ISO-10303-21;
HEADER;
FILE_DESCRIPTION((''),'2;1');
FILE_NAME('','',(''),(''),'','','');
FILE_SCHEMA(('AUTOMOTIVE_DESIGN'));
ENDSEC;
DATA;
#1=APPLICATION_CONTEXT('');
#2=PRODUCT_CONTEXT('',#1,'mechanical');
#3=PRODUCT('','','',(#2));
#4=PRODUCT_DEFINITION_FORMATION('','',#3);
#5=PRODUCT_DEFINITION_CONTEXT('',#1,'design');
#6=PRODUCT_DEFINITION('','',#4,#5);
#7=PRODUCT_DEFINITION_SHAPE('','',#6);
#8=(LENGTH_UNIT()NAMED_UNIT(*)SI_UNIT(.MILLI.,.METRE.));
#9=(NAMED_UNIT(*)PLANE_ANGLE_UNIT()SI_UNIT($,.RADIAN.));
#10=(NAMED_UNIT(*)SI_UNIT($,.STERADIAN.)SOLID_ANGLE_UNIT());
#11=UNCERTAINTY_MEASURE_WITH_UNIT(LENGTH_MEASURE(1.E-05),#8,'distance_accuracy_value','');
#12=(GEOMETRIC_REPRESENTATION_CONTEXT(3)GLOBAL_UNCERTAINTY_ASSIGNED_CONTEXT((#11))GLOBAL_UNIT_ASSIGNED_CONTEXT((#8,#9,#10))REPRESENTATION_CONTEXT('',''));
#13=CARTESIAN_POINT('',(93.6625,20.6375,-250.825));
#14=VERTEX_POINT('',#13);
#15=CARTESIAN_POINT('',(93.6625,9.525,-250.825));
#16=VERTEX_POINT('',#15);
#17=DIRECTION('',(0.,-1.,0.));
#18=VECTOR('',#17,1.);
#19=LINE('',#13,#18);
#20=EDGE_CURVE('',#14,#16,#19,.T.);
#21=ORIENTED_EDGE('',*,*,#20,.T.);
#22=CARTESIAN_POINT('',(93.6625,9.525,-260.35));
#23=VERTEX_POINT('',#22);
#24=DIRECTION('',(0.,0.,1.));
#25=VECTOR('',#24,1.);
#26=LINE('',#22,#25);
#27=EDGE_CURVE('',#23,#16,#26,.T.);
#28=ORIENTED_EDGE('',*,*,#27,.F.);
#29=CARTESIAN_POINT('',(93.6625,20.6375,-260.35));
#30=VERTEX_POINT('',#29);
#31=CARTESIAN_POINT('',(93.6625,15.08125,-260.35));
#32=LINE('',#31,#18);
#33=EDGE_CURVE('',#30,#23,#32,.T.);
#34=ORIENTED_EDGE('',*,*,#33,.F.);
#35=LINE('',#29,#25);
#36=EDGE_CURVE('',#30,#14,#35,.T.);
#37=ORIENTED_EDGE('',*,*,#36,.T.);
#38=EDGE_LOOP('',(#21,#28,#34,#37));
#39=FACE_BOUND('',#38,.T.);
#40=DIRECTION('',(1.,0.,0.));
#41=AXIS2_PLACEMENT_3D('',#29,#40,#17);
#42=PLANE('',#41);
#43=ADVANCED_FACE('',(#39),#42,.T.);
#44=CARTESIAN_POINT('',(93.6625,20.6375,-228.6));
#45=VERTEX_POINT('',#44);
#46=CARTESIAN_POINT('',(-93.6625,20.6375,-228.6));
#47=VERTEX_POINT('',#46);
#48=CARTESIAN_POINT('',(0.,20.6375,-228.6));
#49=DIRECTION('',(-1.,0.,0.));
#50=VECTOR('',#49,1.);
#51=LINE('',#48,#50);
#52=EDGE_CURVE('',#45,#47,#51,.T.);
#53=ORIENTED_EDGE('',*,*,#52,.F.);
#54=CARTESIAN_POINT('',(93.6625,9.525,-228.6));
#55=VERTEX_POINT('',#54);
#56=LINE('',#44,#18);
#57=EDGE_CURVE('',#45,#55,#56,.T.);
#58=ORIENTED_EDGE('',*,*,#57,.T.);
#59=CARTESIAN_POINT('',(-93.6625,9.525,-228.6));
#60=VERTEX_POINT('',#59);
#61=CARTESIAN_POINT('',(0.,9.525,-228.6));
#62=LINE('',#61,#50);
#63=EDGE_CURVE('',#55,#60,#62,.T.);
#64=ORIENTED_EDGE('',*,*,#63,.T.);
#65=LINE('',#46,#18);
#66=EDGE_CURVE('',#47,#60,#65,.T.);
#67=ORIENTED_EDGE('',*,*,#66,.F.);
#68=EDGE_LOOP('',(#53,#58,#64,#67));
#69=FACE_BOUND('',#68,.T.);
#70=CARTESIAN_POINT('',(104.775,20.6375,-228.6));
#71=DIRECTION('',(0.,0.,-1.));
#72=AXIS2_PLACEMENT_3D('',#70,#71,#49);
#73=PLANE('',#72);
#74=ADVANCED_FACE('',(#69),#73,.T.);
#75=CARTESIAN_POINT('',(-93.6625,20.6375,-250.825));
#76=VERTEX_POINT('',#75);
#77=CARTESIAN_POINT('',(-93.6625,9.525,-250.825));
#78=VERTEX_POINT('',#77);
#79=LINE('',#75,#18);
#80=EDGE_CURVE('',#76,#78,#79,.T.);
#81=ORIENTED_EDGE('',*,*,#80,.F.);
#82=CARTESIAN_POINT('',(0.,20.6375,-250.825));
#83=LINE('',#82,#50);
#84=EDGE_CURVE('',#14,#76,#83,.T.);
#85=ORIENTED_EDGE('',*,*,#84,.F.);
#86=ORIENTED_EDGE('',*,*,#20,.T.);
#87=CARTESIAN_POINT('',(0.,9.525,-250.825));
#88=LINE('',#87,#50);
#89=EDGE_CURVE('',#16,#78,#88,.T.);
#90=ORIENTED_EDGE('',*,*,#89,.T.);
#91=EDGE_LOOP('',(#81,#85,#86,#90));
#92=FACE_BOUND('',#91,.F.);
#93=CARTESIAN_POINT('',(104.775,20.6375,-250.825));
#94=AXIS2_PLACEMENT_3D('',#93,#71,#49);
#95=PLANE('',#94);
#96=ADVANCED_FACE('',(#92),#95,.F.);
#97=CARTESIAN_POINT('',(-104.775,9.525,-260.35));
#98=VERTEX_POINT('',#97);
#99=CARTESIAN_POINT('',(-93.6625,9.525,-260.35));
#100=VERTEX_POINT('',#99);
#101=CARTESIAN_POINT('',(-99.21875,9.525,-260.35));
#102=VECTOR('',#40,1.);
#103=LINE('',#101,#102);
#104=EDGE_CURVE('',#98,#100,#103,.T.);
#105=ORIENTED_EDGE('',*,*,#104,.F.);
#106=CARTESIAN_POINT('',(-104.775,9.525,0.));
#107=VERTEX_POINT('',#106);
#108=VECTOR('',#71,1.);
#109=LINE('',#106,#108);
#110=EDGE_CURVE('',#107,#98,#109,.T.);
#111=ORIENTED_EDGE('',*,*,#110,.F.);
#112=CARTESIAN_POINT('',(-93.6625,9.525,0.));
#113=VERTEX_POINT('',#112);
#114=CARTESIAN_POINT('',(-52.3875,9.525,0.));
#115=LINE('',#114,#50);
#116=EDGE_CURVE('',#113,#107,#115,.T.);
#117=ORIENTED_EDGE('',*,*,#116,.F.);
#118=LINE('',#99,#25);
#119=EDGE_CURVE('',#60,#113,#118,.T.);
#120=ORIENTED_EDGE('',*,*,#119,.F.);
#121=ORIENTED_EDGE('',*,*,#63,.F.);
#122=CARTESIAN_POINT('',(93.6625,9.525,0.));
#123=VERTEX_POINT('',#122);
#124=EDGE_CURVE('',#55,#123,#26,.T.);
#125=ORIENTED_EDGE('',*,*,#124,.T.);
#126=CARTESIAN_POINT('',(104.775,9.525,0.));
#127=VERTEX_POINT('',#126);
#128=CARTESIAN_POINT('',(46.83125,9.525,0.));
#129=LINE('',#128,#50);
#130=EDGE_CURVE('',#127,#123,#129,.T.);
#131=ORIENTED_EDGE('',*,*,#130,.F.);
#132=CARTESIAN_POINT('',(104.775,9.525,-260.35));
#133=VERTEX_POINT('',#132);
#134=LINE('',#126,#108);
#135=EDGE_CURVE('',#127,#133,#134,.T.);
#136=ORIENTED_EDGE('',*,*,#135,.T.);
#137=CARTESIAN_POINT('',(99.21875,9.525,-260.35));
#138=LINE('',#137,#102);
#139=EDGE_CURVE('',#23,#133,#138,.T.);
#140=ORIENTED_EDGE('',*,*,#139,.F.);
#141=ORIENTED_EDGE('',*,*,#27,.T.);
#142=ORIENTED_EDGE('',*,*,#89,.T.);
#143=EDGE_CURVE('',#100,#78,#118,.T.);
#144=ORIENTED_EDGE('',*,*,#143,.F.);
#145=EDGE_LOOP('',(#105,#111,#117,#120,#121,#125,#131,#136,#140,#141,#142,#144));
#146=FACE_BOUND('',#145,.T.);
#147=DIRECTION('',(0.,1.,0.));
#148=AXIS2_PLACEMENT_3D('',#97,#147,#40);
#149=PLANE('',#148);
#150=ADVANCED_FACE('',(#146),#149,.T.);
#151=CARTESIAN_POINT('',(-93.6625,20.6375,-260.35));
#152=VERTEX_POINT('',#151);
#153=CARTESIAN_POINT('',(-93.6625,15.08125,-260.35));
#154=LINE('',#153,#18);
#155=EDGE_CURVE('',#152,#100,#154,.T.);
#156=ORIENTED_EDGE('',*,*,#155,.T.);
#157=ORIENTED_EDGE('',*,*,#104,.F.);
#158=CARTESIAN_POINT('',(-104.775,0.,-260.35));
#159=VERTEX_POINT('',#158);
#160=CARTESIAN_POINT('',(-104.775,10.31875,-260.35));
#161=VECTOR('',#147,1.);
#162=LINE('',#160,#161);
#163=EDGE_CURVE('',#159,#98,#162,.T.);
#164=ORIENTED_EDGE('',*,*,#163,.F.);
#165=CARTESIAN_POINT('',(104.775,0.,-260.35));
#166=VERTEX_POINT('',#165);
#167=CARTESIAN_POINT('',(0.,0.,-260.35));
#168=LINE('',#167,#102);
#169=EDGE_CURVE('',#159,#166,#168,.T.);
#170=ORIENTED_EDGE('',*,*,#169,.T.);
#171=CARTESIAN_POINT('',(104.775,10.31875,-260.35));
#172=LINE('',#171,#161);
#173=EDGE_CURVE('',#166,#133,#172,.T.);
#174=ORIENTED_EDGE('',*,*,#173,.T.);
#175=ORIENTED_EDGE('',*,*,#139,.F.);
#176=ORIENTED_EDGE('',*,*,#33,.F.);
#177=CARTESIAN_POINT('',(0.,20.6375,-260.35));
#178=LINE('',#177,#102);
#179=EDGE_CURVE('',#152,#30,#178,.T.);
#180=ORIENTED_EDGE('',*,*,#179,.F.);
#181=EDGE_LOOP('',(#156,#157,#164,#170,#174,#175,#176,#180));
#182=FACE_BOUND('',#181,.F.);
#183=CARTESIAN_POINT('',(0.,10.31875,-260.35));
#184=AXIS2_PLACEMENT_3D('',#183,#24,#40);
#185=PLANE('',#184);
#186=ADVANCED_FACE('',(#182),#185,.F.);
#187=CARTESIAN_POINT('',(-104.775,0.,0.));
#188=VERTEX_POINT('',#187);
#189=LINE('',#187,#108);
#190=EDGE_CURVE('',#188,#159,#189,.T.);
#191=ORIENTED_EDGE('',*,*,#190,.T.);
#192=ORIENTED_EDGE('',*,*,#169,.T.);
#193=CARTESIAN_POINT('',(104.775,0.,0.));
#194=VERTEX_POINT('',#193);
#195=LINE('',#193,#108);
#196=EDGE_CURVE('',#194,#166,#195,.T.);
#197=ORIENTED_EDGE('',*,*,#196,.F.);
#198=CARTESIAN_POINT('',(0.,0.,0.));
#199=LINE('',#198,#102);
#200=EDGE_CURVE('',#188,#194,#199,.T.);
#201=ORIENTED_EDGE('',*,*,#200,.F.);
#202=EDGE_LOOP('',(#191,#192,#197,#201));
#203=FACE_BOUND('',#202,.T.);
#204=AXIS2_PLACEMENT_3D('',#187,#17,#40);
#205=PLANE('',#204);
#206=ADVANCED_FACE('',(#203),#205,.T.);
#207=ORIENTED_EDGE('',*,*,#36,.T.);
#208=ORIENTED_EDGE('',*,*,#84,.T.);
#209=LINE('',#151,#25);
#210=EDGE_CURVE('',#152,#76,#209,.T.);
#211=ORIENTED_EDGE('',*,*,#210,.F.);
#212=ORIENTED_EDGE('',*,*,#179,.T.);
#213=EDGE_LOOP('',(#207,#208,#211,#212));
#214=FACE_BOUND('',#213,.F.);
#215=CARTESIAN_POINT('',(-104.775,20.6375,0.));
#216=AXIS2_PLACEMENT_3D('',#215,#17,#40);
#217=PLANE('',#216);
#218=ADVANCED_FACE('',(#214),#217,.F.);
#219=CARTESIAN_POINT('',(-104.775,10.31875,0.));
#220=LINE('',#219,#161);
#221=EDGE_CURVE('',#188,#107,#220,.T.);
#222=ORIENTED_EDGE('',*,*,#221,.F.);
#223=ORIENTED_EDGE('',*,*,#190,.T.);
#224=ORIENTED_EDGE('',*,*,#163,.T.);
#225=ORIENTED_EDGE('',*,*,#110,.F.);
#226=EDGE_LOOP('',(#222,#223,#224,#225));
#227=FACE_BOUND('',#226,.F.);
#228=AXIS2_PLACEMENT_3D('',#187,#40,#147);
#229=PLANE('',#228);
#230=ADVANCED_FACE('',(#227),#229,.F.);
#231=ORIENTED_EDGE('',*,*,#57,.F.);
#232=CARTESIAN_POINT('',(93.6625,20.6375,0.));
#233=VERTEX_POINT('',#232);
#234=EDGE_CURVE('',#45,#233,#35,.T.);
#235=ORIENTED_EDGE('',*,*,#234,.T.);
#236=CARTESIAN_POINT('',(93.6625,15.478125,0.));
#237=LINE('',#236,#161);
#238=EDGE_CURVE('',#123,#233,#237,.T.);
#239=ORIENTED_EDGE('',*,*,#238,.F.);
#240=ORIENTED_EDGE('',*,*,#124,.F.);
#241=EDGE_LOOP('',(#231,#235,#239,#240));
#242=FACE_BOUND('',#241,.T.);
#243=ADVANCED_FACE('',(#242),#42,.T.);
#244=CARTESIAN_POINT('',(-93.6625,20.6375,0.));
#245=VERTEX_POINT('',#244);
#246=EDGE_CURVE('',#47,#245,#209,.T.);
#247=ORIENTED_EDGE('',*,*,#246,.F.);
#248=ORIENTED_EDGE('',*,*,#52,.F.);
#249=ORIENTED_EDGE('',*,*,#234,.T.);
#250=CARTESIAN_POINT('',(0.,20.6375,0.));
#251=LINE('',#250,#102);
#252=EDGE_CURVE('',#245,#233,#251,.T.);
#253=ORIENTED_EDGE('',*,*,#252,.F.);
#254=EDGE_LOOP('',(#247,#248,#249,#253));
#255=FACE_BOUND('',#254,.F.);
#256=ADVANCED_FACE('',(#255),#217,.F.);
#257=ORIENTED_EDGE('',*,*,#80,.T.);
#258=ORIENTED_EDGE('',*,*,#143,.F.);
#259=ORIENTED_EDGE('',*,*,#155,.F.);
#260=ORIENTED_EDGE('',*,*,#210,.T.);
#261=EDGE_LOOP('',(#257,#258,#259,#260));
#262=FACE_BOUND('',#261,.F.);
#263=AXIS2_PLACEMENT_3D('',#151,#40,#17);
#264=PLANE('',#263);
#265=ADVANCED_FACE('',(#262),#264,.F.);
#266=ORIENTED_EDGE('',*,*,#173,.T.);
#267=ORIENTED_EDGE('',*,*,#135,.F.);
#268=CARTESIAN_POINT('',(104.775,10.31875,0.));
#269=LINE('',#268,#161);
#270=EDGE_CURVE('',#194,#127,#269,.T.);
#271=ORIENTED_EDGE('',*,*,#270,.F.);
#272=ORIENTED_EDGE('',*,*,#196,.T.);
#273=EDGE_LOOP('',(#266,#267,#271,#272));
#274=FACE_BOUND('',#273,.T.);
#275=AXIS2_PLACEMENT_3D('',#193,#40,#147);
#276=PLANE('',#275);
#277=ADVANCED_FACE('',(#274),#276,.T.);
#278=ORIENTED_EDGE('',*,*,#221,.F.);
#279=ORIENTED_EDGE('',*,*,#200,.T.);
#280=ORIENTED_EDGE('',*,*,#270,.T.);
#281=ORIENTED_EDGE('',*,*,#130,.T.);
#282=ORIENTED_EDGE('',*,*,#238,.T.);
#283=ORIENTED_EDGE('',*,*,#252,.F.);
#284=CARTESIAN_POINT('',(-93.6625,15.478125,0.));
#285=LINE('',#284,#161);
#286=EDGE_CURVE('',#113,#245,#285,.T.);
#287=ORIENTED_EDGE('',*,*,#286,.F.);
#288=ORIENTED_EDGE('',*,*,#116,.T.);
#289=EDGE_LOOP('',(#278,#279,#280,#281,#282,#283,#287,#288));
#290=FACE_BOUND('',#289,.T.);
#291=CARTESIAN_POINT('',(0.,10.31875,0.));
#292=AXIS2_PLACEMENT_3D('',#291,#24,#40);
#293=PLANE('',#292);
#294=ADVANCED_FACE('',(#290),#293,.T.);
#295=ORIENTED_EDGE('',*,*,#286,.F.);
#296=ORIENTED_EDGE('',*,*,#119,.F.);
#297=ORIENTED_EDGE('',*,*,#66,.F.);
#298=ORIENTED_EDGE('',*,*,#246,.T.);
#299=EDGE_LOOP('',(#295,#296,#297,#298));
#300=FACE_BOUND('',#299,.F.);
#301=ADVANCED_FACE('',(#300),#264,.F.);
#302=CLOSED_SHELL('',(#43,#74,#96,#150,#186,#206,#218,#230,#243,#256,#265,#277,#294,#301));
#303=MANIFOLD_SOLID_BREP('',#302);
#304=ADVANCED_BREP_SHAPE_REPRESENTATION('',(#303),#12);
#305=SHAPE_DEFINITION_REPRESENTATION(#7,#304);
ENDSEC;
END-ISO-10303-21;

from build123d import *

# Parameters (mm, degrees)
F0_W     = 209.55
F0_H     = 20.6375
F1_DEPTH = 260.35
F2_W     = 209.55
F2_H     = 22.225
F3_DEPTH = 11.1125
F4_W     = 11.1125
F4_H     = 11.1125
F5_DEPTH = 260.351


# Not quite as in the source:
# - a length typed as a fraction of an inch, garbled in the dataset ("3 / 203.2 mm" for 3/8 in), is restored


with BuildPart() as f1:
    # F0 (on Top) → F1 (new body)
    with BuildSketch(Plane.XY):
        with Locations((0, 10.31875)):
            Rectangle(F0_W, F0_H)
    extrude(amount=-F1_DEPTH)

    # F2 (on face) → F3 (cut)
    with BuildSketch(Plane(origin=(0, 20.6375, 0), x_dir=(-1, 0, 0), z_dir=(0, 1, 0))):
        with Locations((0, -239.7125)):
            Rectangle(F2_W, F2_H)
    extrude(amount=-F3_DEPTH, mode=Mode.SUBTRACT)

    # F4 (on face) → F5 (cut, through all)
    with BuildSketch(Plane(origin=(0, 0, -260.35), x_dir=(1, 0, 0), z_dir=(0, 0, -1))):
        with Locations((-99.21875, -15.08125)):
            Rectangle(F4_W, F4_H)
        with Locations((99.21875, -15.08125)):
            Rectangle(F4_W, F4_H)
    extrude(amount=-F5_DEPTH, mode=Mode.SUBTRACT)


solid = f1.part
